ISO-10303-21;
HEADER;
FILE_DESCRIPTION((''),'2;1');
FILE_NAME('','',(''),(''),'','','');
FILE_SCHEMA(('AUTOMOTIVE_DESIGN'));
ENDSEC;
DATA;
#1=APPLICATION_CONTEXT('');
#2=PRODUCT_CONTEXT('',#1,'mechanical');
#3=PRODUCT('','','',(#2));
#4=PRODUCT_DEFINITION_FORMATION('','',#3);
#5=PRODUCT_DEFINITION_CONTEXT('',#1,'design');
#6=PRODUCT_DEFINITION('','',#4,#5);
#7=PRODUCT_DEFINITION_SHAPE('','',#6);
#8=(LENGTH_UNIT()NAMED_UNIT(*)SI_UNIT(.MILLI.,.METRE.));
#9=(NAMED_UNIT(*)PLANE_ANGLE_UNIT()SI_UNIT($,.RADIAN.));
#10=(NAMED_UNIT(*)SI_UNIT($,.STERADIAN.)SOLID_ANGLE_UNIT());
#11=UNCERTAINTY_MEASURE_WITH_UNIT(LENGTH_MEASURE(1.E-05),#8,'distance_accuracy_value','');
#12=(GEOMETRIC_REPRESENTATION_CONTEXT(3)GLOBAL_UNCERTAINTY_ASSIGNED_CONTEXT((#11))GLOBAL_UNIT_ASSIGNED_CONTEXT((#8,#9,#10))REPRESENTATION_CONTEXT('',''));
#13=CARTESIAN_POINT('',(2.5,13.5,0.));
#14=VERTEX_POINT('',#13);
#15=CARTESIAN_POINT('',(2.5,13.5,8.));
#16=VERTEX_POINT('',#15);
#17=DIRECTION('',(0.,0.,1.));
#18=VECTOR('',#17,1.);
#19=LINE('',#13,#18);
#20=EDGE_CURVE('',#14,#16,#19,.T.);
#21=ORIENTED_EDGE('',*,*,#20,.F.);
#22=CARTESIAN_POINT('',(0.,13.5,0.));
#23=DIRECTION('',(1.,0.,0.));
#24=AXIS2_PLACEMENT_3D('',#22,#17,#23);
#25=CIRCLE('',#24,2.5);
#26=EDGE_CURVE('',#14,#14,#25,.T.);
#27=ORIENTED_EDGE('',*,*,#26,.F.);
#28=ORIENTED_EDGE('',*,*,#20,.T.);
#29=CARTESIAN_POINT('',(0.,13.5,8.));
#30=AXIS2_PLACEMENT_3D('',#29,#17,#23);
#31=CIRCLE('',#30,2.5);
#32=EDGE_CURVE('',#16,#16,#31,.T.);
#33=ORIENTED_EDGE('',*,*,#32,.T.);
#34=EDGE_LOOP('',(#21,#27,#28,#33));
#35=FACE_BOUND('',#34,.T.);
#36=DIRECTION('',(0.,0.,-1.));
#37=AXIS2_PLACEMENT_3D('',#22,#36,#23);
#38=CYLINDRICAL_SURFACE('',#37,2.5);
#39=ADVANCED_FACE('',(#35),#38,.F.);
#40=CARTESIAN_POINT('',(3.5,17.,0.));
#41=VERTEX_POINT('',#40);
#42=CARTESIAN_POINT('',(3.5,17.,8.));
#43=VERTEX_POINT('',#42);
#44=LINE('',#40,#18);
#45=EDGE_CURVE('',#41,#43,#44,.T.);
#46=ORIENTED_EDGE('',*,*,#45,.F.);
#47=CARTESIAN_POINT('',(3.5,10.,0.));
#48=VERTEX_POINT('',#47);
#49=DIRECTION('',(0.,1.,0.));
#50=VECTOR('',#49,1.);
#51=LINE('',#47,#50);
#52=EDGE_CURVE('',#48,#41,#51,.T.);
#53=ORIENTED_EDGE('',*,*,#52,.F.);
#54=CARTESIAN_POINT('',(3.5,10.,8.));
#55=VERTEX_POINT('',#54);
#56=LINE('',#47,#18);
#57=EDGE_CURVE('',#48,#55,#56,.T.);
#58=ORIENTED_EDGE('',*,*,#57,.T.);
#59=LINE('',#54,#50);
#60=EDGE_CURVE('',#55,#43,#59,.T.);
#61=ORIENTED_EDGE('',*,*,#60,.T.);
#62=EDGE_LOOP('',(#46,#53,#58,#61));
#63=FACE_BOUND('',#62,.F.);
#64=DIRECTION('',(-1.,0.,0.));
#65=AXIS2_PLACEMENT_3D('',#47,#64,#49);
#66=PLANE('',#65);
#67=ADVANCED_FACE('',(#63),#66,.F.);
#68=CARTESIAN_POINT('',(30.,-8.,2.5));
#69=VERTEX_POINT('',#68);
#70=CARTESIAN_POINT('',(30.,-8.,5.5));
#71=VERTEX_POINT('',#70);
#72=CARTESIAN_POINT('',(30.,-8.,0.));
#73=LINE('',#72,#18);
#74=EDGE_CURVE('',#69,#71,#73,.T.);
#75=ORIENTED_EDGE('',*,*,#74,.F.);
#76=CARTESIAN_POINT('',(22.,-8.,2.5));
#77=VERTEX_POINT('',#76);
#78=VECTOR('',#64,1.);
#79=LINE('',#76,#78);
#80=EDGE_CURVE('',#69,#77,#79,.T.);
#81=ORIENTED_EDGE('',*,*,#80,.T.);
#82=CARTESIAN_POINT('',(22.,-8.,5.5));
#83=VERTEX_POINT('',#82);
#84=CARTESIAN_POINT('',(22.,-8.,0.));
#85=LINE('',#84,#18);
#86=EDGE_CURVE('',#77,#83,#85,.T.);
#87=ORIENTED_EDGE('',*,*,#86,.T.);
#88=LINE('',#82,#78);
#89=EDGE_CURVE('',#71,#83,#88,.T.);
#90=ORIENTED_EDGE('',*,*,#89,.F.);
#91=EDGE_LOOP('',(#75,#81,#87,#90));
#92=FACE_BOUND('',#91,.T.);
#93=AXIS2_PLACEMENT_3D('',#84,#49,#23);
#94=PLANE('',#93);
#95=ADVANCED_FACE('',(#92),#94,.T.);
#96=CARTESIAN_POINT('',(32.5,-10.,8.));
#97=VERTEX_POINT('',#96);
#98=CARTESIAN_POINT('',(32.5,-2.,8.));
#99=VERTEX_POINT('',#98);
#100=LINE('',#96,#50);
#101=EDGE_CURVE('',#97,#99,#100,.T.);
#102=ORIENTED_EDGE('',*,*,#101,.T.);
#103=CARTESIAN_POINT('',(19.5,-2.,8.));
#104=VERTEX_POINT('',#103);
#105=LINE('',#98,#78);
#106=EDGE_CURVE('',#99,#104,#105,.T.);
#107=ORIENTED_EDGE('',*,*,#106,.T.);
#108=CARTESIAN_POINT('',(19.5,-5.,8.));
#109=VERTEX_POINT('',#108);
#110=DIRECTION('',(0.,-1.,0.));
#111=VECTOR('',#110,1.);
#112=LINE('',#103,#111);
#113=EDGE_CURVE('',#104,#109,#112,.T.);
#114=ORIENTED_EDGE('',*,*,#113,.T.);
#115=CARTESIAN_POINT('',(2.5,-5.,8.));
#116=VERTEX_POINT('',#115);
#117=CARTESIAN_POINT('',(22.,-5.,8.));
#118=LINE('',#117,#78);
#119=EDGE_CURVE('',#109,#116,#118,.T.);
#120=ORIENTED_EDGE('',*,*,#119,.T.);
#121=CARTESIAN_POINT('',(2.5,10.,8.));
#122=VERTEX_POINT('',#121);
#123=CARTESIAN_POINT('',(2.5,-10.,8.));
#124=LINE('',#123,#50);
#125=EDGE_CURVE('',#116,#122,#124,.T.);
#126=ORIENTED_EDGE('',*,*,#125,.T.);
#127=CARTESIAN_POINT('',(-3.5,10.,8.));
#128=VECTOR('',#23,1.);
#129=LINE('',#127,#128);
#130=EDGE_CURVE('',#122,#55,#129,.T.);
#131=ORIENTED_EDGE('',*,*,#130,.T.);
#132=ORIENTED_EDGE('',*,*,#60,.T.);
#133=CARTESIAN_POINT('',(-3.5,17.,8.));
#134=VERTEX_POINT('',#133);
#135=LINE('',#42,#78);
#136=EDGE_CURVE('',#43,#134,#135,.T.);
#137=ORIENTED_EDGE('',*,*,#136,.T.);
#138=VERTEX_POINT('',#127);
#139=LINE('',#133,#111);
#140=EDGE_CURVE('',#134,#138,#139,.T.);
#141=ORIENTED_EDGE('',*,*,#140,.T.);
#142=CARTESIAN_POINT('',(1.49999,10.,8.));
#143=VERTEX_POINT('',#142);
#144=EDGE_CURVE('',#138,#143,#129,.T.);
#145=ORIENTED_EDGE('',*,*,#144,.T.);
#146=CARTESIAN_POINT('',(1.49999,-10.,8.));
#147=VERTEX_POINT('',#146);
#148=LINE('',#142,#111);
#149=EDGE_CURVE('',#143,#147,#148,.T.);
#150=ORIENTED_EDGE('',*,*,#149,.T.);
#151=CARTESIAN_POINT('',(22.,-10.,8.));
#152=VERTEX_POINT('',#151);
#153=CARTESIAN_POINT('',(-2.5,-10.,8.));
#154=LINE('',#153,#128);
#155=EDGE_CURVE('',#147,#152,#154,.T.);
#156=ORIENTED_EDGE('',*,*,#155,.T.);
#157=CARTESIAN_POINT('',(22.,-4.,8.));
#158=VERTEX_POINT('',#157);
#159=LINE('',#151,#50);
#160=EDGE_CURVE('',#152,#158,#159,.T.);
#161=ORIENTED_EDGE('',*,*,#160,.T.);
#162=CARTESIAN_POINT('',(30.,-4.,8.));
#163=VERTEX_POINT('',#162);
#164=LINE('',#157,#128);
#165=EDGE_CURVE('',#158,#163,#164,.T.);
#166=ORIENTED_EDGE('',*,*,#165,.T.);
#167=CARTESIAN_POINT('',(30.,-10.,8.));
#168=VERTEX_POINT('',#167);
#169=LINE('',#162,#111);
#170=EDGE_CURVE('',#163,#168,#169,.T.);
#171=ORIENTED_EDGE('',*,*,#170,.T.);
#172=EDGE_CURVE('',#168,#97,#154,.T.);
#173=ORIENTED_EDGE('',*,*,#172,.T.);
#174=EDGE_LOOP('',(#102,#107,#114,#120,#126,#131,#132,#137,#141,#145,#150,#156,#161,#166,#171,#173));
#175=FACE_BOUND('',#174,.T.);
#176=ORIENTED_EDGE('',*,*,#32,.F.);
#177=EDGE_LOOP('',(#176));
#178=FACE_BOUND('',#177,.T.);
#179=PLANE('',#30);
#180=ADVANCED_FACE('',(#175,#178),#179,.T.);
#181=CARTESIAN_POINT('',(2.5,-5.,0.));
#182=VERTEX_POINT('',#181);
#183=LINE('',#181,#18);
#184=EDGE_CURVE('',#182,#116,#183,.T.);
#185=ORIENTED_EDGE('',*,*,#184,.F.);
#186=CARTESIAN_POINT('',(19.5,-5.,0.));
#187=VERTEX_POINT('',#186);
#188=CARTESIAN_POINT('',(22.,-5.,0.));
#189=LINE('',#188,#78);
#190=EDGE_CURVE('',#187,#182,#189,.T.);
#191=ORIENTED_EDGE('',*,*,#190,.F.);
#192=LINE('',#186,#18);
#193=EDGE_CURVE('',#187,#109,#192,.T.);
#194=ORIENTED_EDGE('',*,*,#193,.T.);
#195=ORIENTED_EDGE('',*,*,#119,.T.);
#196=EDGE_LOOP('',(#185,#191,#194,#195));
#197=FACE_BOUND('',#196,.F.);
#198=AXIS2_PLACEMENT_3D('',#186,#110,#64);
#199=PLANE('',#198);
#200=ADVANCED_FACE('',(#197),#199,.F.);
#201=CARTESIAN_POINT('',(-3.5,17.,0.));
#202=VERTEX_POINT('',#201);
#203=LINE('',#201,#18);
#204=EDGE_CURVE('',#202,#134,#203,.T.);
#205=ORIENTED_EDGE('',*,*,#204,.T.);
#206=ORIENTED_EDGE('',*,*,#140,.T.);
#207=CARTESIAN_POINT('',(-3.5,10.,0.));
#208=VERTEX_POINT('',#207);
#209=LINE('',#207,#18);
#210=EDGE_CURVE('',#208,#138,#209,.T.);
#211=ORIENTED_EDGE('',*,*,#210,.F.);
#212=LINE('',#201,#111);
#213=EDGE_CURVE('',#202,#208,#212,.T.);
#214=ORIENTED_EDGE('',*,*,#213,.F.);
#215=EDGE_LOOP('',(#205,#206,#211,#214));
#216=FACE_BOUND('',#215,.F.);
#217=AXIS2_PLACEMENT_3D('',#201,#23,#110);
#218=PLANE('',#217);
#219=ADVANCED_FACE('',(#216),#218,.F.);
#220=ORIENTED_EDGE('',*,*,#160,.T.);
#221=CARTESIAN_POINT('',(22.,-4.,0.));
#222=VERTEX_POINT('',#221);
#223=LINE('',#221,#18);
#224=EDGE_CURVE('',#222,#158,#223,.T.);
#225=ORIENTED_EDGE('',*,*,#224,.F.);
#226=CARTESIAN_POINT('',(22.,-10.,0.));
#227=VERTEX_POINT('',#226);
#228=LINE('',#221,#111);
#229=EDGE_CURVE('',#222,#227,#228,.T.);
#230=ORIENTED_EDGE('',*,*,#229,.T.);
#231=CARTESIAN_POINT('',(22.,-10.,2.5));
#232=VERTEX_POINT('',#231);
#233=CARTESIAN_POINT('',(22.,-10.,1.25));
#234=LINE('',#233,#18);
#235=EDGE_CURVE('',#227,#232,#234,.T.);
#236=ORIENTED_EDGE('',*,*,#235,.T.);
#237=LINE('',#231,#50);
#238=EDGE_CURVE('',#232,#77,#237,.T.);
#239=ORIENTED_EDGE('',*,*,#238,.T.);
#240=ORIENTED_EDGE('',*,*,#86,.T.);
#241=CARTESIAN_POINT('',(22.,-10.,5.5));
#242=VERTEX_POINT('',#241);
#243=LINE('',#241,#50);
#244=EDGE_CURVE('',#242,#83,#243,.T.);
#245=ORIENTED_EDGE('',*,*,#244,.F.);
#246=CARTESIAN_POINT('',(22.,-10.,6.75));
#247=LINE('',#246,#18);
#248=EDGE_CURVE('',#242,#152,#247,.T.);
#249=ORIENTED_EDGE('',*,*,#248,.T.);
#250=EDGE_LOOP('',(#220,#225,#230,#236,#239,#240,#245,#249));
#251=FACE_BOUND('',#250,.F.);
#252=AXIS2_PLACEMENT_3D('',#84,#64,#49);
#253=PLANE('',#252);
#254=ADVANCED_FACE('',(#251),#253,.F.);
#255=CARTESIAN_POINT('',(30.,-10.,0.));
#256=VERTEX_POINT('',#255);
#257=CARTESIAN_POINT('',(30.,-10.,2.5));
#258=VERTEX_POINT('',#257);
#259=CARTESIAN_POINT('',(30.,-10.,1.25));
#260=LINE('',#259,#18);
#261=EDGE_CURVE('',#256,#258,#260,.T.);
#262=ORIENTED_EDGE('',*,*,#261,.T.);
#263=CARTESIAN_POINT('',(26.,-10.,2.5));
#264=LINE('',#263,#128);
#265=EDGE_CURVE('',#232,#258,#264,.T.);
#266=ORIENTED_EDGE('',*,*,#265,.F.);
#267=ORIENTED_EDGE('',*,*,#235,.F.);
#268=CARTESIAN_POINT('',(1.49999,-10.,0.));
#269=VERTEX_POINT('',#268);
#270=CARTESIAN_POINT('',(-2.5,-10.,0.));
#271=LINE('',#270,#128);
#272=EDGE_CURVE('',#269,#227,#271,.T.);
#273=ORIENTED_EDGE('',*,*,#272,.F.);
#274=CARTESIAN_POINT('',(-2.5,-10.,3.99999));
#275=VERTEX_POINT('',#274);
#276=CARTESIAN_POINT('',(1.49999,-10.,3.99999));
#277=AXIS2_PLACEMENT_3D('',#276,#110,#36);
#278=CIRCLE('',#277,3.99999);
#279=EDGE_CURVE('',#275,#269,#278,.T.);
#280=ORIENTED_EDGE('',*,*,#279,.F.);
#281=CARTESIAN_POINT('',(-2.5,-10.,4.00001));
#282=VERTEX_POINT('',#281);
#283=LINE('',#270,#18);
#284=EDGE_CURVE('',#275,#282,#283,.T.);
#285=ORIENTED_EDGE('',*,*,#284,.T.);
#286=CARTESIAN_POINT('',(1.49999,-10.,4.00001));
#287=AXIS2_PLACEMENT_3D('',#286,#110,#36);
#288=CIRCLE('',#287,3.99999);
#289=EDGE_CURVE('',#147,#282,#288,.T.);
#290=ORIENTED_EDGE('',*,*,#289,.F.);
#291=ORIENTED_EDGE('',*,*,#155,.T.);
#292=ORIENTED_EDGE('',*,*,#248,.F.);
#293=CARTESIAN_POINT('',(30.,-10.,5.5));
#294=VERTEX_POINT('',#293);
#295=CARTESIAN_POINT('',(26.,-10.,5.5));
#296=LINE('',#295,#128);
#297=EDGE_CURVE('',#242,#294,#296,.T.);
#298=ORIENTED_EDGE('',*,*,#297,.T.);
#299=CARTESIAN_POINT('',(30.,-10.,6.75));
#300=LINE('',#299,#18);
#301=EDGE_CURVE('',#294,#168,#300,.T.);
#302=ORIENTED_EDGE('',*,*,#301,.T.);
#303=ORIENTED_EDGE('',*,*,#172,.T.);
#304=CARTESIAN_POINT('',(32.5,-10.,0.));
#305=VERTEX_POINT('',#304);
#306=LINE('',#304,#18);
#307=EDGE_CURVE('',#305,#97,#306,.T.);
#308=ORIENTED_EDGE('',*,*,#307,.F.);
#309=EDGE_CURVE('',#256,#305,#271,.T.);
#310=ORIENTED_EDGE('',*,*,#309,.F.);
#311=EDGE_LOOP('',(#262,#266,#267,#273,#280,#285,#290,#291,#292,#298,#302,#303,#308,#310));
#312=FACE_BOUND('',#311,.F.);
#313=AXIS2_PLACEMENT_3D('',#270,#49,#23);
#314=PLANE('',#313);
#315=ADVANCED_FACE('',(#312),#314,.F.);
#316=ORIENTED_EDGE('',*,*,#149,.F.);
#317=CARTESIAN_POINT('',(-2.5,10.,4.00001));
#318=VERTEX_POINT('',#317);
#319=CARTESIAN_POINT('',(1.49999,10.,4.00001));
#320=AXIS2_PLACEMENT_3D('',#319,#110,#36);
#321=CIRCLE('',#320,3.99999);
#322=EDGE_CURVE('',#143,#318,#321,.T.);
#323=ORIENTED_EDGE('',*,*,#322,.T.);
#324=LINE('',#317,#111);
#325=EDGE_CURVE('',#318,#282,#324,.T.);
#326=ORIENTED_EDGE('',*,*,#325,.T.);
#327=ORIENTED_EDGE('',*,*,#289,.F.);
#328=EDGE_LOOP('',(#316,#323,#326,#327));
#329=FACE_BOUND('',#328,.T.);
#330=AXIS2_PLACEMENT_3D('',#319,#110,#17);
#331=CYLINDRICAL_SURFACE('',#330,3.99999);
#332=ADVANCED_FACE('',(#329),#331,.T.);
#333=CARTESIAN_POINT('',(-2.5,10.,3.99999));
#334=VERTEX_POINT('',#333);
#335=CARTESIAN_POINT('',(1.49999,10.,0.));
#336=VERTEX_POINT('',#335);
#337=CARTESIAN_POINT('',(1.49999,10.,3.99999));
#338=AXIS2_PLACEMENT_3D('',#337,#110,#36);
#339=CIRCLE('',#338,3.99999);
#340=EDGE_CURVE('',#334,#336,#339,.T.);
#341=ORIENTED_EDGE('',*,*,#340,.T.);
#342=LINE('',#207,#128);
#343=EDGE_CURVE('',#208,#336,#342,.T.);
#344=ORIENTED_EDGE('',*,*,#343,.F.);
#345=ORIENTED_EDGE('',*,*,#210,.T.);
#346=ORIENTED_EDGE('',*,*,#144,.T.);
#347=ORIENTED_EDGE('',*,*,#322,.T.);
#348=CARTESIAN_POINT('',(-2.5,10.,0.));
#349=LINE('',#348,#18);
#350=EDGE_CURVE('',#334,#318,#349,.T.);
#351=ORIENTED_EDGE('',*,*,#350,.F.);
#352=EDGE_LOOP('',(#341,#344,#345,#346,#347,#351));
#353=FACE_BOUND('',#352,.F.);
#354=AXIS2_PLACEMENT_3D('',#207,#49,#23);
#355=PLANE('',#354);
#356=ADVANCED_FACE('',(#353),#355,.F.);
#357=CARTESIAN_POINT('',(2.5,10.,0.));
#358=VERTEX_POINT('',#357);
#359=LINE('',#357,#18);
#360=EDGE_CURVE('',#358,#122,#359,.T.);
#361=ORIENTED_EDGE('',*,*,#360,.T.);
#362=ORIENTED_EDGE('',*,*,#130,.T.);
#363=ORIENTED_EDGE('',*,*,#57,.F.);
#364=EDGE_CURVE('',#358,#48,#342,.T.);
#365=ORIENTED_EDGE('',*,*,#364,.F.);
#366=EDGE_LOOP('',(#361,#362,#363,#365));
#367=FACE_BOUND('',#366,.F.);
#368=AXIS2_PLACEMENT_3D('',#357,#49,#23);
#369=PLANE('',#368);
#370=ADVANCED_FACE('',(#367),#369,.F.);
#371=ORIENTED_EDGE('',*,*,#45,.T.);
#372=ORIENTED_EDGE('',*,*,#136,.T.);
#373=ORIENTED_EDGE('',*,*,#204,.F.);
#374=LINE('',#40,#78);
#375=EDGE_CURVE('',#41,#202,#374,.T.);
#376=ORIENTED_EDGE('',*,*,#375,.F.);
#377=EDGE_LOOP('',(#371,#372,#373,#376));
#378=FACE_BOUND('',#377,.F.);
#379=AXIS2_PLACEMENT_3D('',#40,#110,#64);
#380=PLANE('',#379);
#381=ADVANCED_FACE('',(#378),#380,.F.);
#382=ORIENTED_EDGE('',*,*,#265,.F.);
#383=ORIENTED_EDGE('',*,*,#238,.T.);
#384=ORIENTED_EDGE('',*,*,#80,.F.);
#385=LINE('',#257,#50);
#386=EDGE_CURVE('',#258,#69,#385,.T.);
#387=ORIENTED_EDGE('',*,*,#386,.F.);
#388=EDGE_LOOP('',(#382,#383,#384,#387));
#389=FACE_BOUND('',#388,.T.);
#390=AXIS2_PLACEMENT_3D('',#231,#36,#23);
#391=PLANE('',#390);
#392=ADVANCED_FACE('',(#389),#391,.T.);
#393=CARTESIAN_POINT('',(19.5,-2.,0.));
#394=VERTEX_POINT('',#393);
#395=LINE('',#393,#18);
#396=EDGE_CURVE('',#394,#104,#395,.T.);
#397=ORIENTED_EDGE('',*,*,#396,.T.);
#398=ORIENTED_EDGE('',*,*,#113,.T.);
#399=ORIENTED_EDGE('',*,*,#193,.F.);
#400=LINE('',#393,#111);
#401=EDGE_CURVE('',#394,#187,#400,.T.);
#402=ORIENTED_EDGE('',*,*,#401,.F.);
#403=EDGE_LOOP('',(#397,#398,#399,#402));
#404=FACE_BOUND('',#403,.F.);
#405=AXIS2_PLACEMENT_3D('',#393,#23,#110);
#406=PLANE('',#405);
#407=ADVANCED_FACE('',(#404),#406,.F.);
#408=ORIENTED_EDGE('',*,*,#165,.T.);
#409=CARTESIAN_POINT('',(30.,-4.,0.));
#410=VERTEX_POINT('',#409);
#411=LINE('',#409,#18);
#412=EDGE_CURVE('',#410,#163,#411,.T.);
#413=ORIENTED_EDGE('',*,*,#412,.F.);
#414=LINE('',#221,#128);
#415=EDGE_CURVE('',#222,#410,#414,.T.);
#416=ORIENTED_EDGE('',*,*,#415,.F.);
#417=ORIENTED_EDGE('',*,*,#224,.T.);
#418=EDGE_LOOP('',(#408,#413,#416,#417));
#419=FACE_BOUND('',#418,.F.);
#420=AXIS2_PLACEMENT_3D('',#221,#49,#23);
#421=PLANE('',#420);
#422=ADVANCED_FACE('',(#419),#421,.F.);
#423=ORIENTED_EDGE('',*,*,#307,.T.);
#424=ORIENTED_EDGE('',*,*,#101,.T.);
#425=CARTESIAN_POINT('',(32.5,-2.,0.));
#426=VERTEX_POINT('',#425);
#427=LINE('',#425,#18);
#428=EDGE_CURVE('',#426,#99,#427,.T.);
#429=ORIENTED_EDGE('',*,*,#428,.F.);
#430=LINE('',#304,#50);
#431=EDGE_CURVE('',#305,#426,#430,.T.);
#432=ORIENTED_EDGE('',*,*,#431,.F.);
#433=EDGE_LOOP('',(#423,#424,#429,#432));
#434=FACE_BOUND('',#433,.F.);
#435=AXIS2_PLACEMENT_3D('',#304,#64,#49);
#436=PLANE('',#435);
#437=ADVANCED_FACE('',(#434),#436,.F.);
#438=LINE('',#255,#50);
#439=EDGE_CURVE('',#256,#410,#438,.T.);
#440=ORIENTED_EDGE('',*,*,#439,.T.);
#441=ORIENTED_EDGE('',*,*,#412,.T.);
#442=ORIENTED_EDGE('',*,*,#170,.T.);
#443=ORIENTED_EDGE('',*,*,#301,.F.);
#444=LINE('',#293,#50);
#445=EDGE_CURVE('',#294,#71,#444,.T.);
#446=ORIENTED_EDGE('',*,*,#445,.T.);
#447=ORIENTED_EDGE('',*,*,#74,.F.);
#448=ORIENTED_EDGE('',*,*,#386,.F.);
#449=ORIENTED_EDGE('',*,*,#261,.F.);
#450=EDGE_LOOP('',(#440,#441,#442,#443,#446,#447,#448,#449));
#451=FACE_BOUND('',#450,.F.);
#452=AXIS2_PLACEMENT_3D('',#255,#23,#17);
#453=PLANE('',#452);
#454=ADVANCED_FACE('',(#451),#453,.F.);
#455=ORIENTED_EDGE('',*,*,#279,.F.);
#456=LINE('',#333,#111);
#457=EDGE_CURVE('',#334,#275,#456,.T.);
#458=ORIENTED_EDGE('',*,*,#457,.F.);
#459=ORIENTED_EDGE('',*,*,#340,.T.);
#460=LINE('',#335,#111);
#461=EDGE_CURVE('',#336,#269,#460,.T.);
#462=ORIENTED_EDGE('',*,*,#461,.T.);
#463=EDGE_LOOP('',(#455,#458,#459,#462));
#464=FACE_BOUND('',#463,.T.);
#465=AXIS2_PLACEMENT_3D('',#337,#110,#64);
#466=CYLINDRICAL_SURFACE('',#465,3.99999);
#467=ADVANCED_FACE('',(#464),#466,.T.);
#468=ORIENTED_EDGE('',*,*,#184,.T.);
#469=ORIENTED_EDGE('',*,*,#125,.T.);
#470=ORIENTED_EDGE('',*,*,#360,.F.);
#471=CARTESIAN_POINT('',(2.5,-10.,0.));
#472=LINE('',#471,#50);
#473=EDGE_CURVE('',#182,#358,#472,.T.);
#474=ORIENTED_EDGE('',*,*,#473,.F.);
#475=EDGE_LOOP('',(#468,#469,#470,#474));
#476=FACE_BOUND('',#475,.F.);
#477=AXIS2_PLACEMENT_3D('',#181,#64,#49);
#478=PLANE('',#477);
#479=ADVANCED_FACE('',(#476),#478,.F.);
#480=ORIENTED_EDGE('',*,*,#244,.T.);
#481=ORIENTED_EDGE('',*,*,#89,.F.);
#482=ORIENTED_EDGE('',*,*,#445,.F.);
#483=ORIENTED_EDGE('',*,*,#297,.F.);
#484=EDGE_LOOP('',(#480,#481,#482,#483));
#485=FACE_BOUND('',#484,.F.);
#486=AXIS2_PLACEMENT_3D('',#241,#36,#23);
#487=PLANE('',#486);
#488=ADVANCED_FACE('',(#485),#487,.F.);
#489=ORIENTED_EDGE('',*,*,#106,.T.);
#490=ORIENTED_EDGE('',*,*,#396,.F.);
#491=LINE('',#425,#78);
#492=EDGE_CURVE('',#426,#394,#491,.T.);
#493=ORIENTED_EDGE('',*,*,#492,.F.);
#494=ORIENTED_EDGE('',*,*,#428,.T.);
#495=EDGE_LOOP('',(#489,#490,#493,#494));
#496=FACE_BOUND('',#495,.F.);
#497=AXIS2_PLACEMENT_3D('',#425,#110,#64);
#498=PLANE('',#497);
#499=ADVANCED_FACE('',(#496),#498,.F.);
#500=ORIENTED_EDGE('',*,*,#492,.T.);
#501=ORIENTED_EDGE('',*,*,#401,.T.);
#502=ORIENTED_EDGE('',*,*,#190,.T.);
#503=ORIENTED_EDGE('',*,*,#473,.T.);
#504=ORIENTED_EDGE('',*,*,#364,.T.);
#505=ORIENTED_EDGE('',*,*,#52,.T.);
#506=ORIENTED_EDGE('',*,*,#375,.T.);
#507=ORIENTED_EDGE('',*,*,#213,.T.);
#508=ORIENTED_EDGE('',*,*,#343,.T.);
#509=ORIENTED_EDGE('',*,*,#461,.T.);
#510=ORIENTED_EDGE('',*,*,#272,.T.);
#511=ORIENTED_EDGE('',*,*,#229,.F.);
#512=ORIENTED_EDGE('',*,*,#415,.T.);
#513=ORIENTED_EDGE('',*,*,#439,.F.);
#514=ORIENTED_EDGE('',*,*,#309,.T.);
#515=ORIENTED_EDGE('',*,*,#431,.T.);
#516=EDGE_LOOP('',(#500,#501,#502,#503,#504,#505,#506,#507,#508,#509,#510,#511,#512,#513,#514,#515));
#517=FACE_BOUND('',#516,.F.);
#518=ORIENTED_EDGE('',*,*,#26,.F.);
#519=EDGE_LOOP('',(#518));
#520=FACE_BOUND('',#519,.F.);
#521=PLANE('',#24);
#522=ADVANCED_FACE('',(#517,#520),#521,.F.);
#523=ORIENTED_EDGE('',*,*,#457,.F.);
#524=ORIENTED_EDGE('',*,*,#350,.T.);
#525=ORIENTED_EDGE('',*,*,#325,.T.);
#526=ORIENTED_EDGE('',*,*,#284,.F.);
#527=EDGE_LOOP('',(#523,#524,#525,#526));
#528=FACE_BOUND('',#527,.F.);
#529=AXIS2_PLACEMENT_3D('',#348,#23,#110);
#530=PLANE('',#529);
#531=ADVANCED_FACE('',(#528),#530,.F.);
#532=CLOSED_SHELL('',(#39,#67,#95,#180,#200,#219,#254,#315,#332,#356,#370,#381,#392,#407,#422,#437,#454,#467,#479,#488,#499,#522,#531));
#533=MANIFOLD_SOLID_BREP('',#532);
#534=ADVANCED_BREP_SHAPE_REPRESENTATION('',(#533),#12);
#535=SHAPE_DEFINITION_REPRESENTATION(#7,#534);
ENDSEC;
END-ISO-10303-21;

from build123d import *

# Parameters (mm, degrees)
F0_R     = 2.5
F0_W     = 8
F0_H     = 2
F1_DEPTH = 8
F2_W     = 8
F2_H     = 2.5
F3_DEPTH = 3
F4_R     = 3.99999


# Not quite as in the source:
# - a fillet or chamfer is up to 0.001 mm smaller than in the source, because OpenCascade refuses the exact size


with BuildPart() as f1:
    # F0 (on Top) → F1 (new body)
    with BuildSketch(Plane.XY):
        Polygon((-3.5, 10), (-2.5, 10), (2.5, 10), (3.5, 10), (3.5, 17), (-3.5, 17), align=None)
        with Locations((0, 13.5)):
            Circle(F0_R, mode=Mode.SUBTRACT)
        Polygon((-2.5, -10), (2.5, -10), (2.5, -5), (2.5, 10), (-2.5, 10), align=None)
        Polygon((2.5, -5), (2.5, -10), (22, -10), (22, -8), (22, -5), (19.5, -5), align=None)
        with Locations((26, -9)):
            Rectangle(F0_W, F0_H)
        Polygon((30, -8), (30, -10), (32.5, -10), (32.5, -5), (30, -5), align=None)
        Polygon((19.5, -4), (19.5, -5), (22, -5), (22, -4), (30, -4), (30, -5), (32.5, -5), (32.5, -2), (19.5, -2), align=None)
    extrude(amount=F1_DEPTH)

    # F2 (on face) → F3 (cut)
    with BuildSketch(Plane.XZ.offset(10)):
        with Locations((26, 6.75)):
            Rectangle(F2_W, F2_H)
        with Locations((26, 1.25)):
            Rectangle(F2_W, F2_H)
    extrude(amount=-F3_DEPTH, mode=Mode.SUBTRACT)

    # F4 (radius 4 in the source; OpenCascade refuses exactly that, so slightly less here)
    f4_edges = [f1.edges().sort_by_distance(p)[0] for p in [
        (-2.5, 0, 8),
        (-2.5, 0, 0),
    ]]
    fillet(f4_edges, radius=F4_R)


solid = f1.part
